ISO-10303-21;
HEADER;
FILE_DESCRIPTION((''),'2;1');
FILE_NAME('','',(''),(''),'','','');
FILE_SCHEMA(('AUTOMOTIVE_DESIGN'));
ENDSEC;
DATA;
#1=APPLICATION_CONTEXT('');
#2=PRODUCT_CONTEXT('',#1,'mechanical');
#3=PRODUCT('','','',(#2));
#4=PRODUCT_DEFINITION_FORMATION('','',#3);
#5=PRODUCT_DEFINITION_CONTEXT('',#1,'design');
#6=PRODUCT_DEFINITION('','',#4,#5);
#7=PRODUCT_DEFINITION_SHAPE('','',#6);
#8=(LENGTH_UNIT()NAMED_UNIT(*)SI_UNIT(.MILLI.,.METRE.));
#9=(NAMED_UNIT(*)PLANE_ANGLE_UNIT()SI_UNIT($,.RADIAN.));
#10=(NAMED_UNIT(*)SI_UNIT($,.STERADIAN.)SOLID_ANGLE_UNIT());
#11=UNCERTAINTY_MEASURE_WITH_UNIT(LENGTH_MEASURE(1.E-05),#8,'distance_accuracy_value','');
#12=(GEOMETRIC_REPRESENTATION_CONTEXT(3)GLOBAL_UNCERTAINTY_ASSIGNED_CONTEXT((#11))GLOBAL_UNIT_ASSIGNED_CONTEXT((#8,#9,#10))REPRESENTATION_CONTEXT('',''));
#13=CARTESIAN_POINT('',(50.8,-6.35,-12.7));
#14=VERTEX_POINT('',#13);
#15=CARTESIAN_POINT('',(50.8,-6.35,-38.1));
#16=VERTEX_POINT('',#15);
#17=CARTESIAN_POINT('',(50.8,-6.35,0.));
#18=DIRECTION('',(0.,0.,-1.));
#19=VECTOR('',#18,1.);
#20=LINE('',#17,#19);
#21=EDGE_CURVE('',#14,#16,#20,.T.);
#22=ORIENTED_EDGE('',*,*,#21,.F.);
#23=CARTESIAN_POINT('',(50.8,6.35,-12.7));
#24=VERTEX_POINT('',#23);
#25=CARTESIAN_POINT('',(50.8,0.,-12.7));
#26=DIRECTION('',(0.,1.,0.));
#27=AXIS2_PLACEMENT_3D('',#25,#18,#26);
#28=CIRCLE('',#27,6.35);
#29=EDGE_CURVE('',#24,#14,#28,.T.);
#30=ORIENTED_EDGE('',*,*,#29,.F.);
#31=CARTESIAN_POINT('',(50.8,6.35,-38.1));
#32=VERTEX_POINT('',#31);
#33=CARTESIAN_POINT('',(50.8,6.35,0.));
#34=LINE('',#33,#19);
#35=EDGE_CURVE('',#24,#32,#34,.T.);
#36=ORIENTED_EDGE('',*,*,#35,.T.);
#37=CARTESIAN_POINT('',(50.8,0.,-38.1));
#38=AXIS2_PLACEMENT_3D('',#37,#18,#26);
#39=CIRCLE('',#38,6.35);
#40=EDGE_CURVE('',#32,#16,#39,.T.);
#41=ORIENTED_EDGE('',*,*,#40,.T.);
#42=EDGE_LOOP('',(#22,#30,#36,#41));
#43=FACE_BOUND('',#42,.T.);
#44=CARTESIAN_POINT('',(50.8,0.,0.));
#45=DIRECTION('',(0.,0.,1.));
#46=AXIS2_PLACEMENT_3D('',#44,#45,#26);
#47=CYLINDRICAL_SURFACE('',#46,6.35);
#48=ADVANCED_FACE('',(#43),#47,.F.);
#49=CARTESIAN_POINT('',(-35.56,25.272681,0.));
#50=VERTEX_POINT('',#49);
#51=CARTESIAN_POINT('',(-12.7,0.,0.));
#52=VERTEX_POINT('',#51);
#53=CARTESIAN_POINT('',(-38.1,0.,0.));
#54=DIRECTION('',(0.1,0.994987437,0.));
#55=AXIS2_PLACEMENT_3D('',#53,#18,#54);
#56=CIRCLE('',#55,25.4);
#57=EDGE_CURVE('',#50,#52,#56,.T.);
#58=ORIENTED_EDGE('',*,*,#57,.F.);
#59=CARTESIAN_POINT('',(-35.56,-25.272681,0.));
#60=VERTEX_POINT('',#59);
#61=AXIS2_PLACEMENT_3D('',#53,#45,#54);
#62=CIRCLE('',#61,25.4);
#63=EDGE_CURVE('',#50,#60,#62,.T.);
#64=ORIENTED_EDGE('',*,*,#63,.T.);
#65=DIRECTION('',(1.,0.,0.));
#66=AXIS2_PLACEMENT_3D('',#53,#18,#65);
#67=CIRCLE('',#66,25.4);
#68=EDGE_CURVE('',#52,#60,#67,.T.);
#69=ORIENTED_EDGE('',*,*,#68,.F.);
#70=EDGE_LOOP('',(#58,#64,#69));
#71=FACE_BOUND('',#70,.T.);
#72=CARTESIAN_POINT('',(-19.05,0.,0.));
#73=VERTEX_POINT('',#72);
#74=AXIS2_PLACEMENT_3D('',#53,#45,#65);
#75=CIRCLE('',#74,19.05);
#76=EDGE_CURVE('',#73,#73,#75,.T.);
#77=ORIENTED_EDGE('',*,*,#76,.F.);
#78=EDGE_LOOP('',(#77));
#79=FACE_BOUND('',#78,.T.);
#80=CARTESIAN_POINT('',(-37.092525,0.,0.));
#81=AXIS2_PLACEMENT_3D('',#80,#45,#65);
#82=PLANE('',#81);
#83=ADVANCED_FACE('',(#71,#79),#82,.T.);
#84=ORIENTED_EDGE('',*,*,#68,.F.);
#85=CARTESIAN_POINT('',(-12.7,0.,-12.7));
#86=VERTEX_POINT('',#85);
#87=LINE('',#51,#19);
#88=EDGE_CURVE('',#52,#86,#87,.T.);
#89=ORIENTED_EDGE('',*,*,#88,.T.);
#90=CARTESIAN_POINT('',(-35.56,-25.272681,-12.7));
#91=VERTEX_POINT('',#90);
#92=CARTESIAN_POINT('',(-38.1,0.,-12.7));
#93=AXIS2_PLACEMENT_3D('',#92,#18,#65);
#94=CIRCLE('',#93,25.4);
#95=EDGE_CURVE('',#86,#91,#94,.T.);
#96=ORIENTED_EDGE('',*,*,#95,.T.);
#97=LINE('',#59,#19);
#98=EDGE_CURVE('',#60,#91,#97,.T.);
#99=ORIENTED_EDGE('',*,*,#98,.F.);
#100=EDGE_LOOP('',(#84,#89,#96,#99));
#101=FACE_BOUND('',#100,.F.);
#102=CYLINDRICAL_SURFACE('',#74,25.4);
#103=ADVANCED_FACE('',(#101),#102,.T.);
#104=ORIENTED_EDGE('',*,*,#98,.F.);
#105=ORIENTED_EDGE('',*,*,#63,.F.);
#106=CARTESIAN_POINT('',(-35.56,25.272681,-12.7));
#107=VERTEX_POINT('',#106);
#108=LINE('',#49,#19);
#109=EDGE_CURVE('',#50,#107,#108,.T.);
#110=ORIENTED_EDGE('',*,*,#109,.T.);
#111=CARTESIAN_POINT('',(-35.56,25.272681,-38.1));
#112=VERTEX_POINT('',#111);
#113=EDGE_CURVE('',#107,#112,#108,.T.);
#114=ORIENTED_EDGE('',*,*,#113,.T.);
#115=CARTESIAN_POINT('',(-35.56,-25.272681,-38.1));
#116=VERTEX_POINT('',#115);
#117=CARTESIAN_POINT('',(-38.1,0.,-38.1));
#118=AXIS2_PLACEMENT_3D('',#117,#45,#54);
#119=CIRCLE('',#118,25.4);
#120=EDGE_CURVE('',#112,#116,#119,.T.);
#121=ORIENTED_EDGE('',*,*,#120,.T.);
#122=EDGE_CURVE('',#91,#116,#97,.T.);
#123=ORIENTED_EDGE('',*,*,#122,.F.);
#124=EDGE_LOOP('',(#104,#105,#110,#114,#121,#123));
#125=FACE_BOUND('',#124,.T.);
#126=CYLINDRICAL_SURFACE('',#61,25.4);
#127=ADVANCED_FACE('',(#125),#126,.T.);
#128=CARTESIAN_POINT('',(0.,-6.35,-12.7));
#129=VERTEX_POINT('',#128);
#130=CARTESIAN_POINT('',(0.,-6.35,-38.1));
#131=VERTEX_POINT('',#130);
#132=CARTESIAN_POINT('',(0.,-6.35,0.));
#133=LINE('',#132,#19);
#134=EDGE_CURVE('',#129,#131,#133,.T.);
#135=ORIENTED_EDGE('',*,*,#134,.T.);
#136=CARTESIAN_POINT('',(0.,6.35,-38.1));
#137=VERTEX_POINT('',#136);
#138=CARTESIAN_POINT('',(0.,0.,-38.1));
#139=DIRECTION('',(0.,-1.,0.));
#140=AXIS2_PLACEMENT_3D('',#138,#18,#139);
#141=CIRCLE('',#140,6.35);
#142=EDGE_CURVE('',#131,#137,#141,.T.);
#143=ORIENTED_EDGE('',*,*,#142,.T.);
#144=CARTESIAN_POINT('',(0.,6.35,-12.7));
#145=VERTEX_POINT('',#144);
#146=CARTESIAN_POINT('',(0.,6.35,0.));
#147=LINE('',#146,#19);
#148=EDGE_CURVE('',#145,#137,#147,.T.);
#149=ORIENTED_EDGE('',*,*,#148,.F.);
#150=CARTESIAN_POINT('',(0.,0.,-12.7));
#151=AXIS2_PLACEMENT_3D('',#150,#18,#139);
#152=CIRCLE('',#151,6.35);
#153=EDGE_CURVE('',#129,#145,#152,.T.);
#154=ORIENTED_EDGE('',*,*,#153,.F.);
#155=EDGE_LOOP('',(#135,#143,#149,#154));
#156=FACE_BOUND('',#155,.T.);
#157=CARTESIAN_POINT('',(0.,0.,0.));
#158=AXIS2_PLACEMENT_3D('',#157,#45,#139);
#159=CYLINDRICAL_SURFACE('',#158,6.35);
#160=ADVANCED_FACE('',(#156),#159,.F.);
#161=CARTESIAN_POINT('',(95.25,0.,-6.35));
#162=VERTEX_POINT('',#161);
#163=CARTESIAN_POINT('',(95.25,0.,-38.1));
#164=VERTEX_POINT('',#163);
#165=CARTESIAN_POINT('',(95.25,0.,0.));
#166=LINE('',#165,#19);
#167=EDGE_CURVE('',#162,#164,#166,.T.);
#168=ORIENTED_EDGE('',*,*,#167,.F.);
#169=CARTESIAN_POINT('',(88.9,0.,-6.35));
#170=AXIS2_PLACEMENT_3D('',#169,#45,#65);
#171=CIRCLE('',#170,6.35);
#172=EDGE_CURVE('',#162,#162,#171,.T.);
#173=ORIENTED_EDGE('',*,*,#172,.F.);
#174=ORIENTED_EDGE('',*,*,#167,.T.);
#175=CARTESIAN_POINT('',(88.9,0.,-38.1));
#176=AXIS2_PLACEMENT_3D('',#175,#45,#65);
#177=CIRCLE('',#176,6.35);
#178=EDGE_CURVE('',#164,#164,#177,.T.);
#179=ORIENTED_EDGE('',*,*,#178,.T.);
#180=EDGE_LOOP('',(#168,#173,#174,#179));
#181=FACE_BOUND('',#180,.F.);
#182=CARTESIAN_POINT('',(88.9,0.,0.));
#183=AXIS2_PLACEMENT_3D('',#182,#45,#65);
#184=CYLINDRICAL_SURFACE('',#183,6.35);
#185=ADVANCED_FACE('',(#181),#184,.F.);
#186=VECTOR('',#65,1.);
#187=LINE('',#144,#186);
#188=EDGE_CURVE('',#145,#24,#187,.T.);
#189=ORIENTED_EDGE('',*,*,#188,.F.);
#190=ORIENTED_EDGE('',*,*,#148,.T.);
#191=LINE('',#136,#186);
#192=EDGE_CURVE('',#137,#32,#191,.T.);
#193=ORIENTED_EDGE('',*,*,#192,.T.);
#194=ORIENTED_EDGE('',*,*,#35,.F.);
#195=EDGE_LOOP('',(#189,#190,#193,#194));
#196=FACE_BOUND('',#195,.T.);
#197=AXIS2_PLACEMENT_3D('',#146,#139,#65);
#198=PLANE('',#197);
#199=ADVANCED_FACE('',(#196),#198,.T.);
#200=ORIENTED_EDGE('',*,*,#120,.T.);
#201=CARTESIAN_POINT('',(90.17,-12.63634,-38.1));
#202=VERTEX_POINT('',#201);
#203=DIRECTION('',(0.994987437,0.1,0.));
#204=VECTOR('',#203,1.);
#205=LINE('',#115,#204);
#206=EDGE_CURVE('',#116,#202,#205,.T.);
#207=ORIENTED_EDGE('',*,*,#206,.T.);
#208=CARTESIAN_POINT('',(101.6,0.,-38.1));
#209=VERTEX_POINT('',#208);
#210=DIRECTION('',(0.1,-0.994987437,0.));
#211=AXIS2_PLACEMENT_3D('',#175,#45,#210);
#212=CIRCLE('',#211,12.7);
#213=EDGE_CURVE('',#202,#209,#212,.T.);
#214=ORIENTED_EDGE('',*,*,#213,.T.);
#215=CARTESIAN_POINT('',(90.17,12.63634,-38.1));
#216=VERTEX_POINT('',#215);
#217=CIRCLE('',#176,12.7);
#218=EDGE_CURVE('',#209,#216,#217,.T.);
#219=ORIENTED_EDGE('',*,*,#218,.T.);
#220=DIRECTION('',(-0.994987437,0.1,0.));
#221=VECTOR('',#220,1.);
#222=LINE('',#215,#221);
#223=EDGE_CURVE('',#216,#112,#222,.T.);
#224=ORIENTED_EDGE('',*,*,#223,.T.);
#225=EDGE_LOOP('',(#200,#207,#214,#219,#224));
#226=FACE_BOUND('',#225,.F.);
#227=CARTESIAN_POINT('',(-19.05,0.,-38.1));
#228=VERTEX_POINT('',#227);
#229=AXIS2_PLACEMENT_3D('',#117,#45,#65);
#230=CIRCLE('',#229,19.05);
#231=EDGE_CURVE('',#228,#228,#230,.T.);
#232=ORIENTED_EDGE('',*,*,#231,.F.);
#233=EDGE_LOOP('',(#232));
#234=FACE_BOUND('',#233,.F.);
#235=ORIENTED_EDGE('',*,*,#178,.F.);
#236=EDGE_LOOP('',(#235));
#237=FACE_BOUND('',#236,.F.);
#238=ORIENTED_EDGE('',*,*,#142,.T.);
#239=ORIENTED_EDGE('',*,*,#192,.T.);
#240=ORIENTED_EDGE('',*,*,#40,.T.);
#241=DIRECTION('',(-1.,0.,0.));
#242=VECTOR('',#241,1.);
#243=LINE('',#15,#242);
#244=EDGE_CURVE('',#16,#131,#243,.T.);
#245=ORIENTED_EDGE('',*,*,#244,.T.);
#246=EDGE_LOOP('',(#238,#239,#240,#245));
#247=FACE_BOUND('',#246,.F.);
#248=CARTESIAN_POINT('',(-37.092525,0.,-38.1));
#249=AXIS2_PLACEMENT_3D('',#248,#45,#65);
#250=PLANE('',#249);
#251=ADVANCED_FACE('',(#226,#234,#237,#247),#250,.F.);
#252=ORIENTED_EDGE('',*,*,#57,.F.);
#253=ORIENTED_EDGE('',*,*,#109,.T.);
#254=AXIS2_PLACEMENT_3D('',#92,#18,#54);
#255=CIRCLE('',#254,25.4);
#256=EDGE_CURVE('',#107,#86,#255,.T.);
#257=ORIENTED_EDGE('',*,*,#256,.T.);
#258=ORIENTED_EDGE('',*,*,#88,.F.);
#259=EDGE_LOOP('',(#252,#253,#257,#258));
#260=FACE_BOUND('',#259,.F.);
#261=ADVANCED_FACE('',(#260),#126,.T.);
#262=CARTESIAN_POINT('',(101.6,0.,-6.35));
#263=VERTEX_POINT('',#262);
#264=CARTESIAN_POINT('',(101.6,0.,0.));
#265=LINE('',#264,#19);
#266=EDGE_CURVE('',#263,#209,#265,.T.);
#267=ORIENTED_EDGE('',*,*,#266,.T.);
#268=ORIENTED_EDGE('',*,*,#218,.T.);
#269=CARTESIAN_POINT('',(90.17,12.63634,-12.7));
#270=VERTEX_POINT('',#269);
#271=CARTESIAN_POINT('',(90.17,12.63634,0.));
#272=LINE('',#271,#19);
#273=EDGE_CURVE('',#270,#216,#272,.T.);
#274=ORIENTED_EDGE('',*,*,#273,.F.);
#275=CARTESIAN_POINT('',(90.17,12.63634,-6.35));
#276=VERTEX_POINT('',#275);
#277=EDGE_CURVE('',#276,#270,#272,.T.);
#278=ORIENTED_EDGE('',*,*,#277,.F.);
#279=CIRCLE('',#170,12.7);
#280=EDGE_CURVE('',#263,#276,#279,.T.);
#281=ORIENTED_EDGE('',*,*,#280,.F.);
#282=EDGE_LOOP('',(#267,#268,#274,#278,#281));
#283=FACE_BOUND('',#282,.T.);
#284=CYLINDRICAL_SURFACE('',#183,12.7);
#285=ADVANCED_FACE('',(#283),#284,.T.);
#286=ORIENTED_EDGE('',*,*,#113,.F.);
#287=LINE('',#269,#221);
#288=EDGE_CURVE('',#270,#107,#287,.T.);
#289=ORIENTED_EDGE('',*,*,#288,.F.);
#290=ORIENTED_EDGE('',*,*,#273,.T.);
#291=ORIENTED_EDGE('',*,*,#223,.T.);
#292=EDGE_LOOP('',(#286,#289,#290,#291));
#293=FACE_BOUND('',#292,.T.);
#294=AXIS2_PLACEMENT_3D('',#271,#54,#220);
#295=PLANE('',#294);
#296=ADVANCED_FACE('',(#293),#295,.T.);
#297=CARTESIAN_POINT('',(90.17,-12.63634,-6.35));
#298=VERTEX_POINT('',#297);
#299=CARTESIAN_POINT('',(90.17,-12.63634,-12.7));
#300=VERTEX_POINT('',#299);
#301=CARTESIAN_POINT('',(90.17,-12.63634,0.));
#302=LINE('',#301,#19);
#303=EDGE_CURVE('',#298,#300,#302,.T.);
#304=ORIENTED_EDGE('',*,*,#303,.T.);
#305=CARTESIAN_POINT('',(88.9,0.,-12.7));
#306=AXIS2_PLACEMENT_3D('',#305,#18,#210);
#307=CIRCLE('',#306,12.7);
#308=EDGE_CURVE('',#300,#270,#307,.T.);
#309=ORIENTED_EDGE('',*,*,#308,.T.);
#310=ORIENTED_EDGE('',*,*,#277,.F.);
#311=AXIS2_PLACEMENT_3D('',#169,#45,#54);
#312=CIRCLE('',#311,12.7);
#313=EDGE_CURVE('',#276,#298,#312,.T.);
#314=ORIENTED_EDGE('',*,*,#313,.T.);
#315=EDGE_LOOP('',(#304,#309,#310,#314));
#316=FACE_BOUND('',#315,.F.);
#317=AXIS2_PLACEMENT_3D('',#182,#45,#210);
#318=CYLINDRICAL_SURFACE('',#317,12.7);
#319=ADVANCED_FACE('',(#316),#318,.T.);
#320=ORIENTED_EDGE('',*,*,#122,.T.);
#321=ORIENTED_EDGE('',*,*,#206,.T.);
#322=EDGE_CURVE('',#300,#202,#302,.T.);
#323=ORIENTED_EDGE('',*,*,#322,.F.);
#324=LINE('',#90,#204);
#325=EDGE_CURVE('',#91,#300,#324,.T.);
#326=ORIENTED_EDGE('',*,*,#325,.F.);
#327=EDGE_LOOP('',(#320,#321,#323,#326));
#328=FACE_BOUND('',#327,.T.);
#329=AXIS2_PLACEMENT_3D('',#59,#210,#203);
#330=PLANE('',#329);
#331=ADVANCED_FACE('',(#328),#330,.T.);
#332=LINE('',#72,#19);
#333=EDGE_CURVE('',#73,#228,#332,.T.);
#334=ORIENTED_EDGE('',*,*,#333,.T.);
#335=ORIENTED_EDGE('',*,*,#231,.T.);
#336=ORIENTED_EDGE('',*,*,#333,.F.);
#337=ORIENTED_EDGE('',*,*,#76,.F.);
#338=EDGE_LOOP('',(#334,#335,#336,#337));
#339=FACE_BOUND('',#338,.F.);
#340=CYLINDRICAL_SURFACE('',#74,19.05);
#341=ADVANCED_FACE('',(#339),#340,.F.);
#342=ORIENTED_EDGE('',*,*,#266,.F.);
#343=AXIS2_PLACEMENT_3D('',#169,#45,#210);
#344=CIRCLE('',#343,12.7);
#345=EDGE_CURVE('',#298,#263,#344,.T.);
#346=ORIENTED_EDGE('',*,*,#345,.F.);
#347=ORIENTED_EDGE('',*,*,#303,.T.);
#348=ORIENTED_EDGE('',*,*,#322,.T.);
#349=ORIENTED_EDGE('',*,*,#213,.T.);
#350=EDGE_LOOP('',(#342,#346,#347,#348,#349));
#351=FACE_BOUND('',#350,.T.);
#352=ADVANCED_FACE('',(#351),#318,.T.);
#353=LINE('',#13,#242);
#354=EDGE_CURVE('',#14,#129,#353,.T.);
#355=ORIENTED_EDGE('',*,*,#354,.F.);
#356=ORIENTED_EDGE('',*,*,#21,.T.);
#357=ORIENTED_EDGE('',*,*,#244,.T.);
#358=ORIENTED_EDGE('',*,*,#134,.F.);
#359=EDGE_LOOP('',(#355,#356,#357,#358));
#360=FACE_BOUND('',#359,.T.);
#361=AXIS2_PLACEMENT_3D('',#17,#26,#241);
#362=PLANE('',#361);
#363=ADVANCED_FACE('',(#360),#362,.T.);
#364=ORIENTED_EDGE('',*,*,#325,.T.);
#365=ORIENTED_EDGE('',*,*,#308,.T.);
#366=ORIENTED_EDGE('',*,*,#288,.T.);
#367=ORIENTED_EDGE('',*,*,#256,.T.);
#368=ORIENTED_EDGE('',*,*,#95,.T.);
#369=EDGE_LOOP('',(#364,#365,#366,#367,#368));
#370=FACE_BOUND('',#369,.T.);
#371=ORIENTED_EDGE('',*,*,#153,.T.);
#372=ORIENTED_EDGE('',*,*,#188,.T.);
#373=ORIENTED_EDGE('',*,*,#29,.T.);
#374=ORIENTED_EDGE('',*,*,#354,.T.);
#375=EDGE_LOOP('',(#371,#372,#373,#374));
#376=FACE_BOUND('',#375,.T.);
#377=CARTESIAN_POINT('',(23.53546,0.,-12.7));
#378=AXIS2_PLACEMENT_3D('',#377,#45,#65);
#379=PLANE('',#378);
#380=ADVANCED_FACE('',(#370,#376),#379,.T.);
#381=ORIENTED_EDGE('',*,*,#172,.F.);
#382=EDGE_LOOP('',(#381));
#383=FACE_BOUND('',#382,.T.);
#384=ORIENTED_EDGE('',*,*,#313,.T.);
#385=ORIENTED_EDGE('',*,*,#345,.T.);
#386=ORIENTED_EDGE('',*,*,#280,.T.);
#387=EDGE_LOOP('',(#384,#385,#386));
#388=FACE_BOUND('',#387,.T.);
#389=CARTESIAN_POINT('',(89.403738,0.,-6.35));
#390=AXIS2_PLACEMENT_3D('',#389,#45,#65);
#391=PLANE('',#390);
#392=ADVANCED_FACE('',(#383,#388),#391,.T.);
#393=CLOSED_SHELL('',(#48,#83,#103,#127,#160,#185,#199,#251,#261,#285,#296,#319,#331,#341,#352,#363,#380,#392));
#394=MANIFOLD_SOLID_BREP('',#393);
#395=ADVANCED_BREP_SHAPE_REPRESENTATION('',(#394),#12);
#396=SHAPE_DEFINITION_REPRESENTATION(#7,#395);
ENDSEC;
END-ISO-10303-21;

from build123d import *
from build123d import SkipClean  # not in build123d's __all__

# Parameters (mm, degrees)
F0_R     = 19.05
F0_R_2   = 6.35
F1_DEPTH = 38.1
F2_DEPTH = 6.35
F3_DEPTH = 12.7


with BuildPart() as f1:
    # F0 (on Top) → F1 (new body)
    with BuildSketch(Plane.XY):
        with BuildLine():
            ThreePointArc((-35.56, -25.2726809025), (-19.2628558428, -17.0388379885), (-12.7, 0))
            ThreePointArc((-12.7, 0), (-19.2628558428, 17.0388379885), (-35.56, 25.2726809025))
            ThreePointArc((-35.56, 25.2726809025), (-63.5, 0), (-35.56, -25.2726809025))
        make_face()
        with Locations((-38.1, 0)):
            Circle(F0_R, mode=Mode.SUBTRACT)
        with BuildLine():
            ThreePointArc((-35.56, 25.2726809025), (-19.2628558428, 17.0388379885), (-12.7, 0))
            ThreePointArc((-12.7, 0), (-19.2628558428, -17.0388379885), (-35.56, -25.2726809025))
            Line((-35.56, -25.2726809025), (90.17, -12.6363404513))
            ThreePointArc((90.17, -12.6363404513), (76.2, 0), (90.17, 12.6363404513))
            Line((90.17, 12.6363404513), (-35.56, 25.2726809025))
        make_face()
        with BuildLine():
            ThreePointArc((0, -6.35), (-6.35, 0), (0, 6.35))
            Line((0, 6.35), (50.8, 6.35))
            ThreePointArc((50.8, 6.35), (57.15, 0), (50.8, -6.35))
            Line((50.8, -6.35), (0, -6.35))
        make_face(mode=Mode.SUBTRACT)
        with BuildLine():
            ThreePointArc((101.6, 0), (98.3185720786, 8.5194189943), (90.17, 12.6363404513))
            ThreePointArc((90.17, 12.6363404513), (76.2, 0), (90.17, -12.6363404513))
            ThreePointArc((90.17, -12.6363404513), (98.3185720786, -8.5194189943), (101.6, 0))
        make_face()
        with Locations((88.9, 0)):
            Circle(F0_R_2, mode=Mode.SUBTRACT)
    extrude(amount=-F1_DEPTH)

    # F0 (on Top) → F2 (cut)
    with BuildSketch(Plane.XY):
        with BuildLine():
            ThreePointArc((101.6, 0), (98.3185720786, 8.5194189943), (90.17, 12.6363404513))
            ThreePointArc((90.17, 12.6363404513), (76.2, 0), (90.17, -12.6363404513))
            ThreePointArc((90.17, -12.6363404513), (98.3185720786, -8.5194189943), (101.6, 0))
        make_face()
        with Locations((88.9, 0)):
            Circle(F0_R_2, mode=Mode.SUBTRACT)
    extrude(amount=-F2_DEPTH, mode=Mode.SUBTRACT)

    # F0 (on Top) → F3 (cut)
    with BuildSketch(Plane.XY):
        with BuildLine():
            ThreePointArc((-35.56, 25.2726809025), (-19.2628558428, 17.0388379885), (-12.7, 0))
            ThreePointArc((-12.7, 0), (-19.2628558428, -17.0388379885), (-35.56, -25.2726809025))
            Line((-35.56, -25.2726809025), (90.17, -12.6363404513))
            ThreePointArc((90.17, -12.6363404513), (76.2, 0), (90.17, 12.6363404513))
            Line((90.17, 12.6363404513), (-35.56, 25.2726809025))
        make_face()
        with BuildLine():
            ThreePointArc((0, -6.35), (-6.35, 0), (0, 6.35))
            Line((0, 6.35), (50.8, 6.35))
            ThreePointArc((50.8, 6.35), (57.15, 0), (50.8, -6.35))
            Line((50.8, -6.35), (0, -6.35))
        make_face(mode=Mode.SUBTRACT)
    with SkipClean():  # cleaning this boolean's faces spoils the solid; the shape is the same uncleaned
        extrude(amount=-F3_DEPTH, mode=Mode.SUBTRACT)


solid = f1.part
